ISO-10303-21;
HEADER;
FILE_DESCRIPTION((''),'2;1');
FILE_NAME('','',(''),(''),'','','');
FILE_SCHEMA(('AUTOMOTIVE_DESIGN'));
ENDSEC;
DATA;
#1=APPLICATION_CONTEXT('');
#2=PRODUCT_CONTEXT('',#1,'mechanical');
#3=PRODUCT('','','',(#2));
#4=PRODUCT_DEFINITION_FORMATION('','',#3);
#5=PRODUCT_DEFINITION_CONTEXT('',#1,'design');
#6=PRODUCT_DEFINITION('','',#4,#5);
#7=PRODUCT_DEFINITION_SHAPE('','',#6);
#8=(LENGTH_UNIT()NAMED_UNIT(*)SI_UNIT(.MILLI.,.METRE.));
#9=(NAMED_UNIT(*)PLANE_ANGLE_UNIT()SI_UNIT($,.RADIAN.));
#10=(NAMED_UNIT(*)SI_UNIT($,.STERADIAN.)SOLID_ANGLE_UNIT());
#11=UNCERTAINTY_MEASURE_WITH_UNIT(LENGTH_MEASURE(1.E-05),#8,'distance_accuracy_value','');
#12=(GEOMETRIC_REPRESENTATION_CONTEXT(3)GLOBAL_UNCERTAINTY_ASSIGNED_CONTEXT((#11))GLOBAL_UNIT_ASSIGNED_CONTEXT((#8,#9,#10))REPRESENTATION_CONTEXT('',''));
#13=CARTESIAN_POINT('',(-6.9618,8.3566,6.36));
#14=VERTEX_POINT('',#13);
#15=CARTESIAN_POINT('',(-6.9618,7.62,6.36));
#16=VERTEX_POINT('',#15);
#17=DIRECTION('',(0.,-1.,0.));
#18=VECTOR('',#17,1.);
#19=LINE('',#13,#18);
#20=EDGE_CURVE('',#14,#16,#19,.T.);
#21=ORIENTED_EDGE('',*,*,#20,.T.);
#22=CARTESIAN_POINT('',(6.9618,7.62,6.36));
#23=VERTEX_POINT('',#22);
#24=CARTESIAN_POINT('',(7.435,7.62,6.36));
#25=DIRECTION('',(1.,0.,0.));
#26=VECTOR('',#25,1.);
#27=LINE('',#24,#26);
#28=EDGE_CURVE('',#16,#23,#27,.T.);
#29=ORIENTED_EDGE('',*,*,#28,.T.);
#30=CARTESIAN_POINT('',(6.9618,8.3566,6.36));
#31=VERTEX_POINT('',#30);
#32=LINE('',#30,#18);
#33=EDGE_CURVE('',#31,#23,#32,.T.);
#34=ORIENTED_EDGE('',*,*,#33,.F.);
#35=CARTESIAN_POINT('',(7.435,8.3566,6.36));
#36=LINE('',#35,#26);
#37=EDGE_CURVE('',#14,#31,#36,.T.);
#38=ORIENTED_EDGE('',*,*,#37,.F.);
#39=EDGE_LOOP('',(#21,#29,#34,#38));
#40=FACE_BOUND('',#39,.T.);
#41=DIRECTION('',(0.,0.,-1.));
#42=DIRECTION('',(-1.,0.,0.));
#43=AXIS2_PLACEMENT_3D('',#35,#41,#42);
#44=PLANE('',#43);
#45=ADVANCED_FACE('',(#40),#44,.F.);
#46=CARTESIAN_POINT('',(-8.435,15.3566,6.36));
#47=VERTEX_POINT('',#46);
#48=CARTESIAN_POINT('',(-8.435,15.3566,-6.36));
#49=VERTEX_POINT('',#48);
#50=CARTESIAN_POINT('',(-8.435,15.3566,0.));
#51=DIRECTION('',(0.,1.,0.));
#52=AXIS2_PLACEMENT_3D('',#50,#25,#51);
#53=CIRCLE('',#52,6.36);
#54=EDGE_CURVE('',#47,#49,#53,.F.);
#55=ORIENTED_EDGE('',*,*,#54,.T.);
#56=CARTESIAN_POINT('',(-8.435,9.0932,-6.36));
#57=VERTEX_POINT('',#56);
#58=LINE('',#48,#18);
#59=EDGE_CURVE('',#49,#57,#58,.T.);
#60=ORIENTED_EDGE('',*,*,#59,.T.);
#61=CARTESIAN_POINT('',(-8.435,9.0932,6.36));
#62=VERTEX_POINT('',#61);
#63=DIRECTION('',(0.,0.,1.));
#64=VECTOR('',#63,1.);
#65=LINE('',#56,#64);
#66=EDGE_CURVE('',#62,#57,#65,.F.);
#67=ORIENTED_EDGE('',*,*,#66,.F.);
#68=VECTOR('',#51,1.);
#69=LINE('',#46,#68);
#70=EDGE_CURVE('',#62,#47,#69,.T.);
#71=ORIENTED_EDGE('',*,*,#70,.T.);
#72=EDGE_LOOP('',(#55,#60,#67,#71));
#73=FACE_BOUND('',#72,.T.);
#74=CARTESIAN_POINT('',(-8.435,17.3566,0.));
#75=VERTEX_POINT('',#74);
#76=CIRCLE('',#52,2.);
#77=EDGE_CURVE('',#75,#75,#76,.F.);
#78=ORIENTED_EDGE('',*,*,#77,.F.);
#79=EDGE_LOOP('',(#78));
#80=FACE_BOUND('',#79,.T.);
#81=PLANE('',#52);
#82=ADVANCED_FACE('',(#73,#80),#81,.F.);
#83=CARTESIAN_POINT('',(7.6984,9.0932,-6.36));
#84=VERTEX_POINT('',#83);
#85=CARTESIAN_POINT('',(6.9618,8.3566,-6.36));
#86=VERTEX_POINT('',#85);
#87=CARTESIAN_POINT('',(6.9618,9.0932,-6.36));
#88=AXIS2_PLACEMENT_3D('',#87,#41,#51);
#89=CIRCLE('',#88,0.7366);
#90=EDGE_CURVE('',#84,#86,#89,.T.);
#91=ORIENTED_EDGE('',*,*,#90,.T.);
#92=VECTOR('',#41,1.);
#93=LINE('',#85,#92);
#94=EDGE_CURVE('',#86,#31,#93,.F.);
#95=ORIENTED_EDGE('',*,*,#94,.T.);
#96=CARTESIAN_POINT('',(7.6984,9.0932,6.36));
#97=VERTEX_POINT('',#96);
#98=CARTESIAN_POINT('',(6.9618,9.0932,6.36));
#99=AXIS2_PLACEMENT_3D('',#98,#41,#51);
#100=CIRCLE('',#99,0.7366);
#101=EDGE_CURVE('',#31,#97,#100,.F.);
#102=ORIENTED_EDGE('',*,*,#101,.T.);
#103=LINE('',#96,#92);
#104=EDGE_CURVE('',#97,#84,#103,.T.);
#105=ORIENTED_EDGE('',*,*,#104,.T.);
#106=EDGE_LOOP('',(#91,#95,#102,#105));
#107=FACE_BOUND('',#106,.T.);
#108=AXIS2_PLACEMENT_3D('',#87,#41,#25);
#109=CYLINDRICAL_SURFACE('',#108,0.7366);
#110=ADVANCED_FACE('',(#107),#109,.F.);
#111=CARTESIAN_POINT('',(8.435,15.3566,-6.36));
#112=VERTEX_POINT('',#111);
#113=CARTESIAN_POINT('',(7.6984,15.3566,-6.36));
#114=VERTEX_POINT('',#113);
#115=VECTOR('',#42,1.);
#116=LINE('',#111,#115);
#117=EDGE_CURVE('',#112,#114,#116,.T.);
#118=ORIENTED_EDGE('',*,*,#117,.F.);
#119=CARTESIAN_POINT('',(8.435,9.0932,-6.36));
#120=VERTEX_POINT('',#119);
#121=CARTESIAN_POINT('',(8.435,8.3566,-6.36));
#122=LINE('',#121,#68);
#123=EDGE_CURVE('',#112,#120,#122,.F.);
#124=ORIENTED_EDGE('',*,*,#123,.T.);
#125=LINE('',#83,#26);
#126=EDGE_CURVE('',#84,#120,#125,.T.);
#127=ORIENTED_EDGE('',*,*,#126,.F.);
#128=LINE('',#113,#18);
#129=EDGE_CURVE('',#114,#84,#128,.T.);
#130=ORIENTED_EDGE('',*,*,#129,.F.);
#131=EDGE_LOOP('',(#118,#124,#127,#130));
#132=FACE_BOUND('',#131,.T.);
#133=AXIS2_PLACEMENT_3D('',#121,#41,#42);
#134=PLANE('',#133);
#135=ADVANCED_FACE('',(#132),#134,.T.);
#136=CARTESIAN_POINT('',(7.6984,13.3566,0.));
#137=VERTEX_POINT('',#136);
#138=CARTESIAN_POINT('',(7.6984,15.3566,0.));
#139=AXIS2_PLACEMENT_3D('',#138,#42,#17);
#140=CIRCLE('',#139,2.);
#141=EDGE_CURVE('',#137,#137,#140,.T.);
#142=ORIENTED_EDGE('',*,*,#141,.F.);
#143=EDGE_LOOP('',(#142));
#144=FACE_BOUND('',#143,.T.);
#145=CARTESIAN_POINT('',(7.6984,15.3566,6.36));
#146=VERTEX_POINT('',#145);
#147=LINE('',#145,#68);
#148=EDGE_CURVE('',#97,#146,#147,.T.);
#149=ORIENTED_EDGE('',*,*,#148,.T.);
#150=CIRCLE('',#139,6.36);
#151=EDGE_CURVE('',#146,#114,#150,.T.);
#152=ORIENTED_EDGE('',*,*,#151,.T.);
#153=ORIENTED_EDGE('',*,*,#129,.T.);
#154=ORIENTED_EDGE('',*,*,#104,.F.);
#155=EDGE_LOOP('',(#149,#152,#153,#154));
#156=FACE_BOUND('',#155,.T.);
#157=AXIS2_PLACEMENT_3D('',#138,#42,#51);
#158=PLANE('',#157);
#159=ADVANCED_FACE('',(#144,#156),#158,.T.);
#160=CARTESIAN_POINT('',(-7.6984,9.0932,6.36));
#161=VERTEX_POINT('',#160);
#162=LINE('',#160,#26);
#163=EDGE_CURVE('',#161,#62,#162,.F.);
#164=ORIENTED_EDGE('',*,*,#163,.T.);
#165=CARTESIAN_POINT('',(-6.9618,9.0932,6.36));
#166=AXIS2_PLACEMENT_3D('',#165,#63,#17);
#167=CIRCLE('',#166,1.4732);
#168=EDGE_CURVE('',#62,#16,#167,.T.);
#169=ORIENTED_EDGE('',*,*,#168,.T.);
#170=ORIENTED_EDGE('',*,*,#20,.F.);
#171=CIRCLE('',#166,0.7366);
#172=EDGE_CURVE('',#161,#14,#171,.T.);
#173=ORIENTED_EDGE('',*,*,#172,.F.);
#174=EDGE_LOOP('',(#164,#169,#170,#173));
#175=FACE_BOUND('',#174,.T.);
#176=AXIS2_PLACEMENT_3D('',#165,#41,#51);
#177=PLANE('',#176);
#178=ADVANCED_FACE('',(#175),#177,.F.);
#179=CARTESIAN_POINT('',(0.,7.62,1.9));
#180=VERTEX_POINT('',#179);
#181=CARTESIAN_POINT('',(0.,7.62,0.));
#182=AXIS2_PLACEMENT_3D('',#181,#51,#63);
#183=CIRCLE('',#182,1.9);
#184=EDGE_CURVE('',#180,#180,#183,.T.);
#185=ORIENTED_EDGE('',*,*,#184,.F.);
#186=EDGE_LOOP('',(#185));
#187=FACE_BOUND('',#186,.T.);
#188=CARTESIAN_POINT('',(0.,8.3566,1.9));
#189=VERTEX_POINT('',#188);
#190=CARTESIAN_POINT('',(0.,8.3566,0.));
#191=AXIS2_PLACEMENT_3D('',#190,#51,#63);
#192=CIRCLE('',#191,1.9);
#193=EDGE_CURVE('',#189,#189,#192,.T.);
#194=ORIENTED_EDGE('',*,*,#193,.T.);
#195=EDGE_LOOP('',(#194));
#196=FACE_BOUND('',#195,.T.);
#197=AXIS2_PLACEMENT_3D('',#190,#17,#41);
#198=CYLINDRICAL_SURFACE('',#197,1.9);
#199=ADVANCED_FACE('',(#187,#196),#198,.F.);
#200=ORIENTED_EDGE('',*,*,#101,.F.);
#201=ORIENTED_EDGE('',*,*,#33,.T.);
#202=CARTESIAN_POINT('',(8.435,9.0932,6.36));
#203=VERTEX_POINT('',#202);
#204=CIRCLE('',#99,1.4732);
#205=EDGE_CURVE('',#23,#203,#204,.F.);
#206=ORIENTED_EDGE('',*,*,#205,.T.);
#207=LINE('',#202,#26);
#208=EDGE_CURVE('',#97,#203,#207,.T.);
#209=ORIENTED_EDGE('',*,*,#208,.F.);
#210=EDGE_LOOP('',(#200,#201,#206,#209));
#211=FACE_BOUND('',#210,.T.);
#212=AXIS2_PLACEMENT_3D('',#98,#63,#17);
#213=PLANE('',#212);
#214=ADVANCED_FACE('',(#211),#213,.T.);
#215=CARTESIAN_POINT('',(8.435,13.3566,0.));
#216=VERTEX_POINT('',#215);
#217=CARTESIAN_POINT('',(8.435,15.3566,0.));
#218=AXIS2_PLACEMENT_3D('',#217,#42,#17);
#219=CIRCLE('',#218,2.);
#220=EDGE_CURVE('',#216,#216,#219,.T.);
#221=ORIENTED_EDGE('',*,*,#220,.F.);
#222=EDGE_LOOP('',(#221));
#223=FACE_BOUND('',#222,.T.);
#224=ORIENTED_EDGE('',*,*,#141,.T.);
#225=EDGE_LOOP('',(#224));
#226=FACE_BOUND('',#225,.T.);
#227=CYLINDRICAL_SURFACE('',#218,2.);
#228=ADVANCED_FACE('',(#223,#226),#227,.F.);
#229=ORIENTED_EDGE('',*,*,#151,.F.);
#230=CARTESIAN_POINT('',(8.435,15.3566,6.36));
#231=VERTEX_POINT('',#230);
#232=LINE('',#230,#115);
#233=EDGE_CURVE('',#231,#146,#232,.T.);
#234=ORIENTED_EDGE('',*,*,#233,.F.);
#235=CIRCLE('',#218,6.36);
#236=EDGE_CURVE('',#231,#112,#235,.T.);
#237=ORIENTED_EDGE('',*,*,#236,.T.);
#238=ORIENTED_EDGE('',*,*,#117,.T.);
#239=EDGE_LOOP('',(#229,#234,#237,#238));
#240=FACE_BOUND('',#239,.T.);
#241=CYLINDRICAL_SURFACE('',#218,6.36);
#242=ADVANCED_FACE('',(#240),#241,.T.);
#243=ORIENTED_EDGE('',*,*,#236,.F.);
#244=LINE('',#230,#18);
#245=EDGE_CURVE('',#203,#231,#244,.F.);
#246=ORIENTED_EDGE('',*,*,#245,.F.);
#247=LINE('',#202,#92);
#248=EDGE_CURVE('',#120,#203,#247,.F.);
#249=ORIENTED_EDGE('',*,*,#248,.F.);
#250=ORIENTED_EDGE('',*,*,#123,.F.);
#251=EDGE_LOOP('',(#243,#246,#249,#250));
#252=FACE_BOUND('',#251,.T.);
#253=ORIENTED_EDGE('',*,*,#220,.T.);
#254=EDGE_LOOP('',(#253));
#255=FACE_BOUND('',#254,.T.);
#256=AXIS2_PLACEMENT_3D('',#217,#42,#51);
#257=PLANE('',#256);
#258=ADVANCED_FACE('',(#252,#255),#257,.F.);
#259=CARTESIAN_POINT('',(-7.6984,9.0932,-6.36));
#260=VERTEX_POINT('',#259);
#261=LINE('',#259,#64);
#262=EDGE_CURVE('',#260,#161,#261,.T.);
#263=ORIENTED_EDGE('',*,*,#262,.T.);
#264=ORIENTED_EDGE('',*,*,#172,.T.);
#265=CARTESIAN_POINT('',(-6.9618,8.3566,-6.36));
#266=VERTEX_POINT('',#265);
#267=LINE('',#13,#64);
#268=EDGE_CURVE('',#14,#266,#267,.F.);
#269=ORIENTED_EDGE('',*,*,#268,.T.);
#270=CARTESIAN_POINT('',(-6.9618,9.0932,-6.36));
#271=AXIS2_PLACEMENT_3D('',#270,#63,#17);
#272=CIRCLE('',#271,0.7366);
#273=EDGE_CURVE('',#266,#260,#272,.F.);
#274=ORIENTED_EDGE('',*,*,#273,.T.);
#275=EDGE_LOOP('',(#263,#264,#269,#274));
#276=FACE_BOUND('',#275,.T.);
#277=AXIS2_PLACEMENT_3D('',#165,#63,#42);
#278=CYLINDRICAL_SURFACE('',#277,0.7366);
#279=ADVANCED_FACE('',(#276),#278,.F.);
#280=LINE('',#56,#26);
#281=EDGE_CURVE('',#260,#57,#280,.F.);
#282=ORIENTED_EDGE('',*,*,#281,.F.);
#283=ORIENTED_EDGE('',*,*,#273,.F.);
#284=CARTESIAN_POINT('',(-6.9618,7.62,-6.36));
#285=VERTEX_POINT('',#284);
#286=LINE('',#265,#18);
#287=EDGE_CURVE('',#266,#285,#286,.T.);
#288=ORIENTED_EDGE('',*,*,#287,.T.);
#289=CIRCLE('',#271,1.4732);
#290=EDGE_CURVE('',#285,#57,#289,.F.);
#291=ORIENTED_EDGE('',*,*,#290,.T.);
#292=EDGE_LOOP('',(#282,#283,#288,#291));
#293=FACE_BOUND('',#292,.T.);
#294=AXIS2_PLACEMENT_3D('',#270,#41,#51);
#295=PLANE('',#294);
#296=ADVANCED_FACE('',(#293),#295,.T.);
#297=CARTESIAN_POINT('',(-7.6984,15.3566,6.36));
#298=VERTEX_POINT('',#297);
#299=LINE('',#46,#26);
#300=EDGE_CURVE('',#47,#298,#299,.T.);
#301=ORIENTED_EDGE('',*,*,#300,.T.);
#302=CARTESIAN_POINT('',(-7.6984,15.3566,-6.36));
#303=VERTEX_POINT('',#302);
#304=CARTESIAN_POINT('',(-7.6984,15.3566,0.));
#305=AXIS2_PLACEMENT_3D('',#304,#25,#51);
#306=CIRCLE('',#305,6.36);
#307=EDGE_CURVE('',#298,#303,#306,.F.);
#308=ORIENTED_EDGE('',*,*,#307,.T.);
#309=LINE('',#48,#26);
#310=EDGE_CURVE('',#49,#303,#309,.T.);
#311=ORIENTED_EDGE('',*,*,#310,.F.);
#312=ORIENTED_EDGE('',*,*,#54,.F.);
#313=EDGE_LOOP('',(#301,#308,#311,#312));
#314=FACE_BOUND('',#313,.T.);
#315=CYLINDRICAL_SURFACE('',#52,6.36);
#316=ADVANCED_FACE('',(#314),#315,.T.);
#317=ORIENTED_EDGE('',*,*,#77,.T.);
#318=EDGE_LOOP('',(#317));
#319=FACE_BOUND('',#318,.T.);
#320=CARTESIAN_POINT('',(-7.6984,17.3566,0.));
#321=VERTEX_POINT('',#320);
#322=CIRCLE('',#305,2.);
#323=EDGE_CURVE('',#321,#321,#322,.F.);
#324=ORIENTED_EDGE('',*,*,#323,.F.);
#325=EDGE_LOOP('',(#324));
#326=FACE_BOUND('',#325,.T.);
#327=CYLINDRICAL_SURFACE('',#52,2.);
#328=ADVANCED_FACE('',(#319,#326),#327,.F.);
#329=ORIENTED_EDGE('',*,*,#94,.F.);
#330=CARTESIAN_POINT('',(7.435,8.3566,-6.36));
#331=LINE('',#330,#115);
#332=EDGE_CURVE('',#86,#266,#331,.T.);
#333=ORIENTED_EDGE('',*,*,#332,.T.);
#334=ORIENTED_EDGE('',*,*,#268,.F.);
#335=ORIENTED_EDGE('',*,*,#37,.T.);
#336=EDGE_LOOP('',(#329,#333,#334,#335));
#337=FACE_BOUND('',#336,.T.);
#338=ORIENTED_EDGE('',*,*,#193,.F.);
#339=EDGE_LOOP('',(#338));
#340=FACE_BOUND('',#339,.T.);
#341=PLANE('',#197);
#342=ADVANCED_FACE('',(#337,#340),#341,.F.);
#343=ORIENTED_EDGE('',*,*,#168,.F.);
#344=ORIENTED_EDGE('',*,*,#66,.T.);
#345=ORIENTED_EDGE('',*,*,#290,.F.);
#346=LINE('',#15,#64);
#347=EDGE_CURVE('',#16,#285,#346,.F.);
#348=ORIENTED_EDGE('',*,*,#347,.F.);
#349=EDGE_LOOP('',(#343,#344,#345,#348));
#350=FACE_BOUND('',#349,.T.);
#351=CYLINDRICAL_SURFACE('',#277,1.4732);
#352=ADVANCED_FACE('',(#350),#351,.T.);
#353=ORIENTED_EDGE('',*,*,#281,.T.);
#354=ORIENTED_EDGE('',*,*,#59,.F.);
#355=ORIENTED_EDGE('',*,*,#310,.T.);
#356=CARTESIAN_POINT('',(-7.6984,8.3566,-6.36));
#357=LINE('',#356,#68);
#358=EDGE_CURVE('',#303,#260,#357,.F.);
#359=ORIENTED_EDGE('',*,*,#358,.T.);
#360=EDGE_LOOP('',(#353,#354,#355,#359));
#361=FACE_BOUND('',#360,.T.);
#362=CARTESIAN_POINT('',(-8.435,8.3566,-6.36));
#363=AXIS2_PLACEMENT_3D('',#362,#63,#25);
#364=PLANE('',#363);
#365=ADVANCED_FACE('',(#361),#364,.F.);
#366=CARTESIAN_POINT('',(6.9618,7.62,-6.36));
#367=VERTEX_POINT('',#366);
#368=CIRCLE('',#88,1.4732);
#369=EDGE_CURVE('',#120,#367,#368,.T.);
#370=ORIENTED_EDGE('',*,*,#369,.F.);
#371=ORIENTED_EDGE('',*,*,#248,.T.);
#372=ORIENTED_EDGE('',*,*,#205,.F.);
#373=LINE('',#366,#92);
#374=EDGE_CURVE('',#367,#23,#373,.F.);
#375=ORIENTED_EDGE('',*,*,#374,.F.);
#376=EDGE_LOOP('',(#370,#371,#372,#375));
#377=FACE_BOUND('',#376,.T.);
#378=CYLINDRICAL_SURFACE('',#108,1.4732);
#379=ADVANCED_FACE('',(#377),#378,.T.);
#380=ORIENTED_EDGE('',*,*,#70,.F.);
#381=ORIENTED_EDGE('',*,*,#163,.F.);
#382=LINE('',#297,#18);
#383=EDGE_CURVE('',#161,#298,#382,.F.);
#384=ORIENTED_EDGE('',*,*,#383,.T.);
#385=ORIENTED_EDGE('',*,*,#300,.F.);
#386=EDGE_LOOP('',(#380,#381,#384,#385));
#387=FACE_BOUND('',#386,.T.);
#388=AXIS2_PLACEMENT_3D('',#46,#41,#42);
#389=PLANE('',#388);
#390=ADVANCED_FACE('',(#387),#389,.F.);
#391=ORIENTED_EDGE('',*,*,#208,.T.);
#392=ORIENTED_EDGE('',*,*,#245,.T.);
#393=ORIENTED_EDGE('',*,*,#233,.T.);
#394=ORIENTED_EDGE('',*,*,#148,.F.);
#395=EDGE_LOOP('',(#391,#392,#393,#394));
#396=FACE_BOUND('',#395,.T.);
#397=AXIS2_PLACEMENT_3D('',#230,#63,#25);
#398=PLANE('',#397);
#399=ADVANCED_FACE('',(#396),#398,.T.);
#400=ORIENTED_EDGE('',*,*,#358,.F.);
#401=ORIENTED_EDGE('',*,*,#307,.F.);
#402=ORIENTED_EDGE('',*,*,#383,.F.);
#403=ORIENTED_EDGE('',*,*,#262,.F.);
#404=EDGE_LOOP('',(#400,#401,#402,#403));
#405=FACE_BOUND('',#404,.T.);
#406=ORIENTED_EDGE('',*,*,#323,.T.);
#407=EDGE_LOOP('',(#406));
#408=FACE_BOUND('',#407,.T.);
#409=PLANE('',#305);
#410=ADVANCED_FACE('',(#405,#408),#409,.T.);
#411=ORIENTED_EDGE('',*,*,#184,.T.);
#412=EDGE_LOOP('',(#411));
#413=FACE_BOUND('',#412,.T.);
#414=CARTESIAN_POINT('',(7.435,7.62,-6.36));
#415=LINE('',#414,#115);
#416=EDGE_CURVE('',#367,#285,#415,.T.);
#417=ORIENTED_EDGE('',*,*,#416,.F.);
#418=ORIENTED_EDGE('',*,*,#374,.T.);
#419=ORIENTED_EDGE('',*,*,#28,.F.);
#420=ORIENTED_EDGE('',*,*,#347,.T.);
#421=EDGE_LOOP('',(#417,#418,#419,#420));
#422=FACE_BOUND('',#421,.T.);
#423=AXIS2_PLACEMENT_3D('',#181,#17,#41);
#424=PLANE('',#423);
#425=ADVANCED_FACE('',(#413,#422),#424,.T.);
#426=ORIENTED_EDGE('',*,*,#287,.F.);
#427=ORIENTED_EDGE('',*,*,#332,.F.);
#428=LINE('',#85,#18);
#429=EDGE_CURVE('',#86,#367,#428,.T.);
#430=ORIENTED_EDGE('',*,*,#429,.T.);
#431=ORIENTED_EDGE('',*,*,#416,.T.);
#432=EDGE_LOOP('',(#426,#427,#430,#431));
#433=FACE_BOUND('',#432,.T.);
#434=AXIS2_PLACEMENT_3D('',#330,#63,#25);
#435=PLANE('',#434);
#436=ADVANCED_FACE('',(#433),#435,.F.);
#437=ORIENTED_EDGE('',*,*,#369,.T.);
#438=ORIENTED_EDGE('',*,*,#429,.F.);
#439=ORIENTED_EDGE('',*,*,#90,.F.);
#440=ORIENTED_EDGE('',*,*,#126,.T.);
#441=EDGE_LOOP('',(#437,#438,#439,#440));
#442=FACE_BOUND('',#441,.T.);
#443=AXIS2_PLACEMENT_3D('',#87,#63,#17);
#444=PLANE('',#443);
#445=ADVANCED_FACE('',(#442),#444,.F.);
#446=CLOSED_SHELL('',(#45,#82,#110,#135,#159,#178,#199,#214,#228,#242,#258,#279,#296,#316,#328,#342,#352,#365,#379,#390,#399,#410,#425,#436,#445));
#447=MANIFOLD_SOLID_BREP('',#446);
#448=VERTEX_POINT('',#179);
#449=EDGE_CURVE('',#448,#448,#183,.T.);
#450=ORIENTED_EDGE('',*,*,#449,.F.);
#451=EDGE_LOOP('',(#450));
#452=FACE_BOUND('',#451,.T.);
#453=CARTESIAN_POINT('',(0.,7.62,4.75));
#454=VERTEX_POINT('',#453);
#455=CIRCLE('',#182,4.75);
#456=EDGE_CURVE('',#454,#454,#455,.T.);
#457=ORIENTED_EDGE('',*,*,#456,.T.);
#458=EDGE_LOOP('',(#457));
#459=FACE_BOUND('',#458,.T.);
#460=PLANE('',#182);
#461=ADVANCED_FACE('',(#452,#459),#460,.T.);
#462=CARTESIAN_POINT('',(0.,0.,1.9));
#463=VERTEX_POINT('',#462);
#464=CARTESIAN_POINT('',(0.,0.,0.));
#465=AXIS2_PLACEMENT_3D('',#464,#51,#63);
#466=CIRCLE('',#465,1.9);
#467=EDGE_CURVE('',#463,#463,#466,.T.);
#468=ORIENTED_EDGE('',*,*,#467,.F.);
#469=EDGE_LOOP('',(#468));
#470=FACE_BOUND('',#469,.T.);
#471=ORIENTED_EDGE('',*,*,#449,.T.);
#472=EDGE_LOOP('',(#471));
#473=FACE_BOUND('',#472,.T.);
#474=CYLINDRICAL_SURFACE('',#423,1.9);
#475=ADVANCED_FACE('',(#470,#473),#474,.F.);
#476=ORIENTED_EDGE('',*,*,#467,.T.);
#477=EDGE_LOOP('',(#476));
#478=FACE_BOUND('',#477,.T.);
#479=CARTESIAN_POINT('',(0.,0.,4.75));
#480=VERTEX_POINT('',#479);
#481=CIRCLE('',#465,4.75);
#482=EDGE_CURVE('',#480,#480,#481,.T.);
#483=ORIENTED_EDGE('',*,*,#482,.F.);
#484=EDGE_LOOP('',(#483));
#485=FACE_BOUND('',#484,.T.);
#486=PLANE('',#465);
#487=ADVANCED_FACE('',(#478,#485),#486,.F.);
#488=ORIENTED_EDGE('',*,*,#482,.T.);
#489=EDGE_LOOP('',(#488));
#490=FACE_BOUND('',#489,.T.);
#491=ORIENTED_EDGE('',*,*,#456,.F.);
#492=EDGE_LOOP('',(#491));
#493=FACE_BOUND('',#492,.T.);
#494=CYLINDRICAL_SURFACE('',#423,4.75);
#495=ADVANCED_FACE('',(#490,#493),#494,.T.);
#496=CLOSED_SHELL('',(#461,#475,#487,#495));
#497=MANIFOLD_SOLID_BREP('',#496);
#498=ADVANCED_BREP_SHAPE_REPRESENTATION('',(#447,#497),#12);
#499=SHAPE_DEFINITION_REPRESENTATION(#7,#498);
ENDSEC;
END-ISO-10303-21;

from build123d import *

# Parameters (mm, degrees)
SKETCH1_R                    = 4.75
SKETCH1_R_2                  = 1.9
BOSS_EXTRUDE1_DEPTH          = 7.62
SKETCH2_W                    = 14.87
SKETCH2_H                    = 12.72
SKETCH2_R                    = 1.9
BASE_FLANGE1_DEPTH           = 0.7366
EDGE_FLANGE1_STRIP_W         = 5.4196
EDGE_FLANGE1_STRIP_H         = 0.7366
EDGE_FLANGE1_STRIP_CUT_DEPTH = 12.72
EDGE_FLANGE1_DEPTH           = 12.72
EDGE_FLANGE1_PROFILE_R       = 2
EDGE_FLANGE1_FLAT_DEPTH      = 0.7366


# Sheet-metal steps are written as plain solids
with BuildPart() as part:
    # Sketch1 → Boss-Extrude1 (new body)
    with BuildSketch(Plane(origin=(0, 0, 0), x_dir=(1, 0, 0), z_dir=(0, 1, 0))):
        with Locations(Location((0, 0, 0), (0, 0, 270))):
            Circle(SKETCH1_R)
        with Locations(Location((0, 0, 0), (0, 0, 270))):
            Circle(SKETCH1_R_2, mode=Mode.SUBTRACT)
    extrude(amount=BOSS_EXTRUDE1_DEPTH)


with BuildPart() as body_2:
    # Sketch2 → Base-Flange1 (new body)
    with BuildSketch(Plane(origin=(0, 7.62, 0), x_dir=(1, 0, 0), z_dir=(0, 1, 0))):
        Rectangle(SKETCH2_W, SKETCH2_H)
        with Locations(Location((0, 0, 0), (0, 0, 270))):
            Circle(SKETCH2_R, mode=Mode.SUBTRACT)
    extrude(amount=BASE_FLANGE1_DEPTH)

    # Edge-Flange1 strip (across the edge) → Edge-Flange1 strip cut (cut)
    with BuildSketch(Plane(origin=(-8.435, 8.3566, -6.36), x_dir=(1, 0, 0), z_dir=(0, 0, 1))):
        with Locations((-1.2366, -0.3683)):
            Rectangle(EDGE_FLANGE1_STRIP_W, EDGE_FLANGE1_STRIP_H)
    edge_flange1_strip_cut = extrude(amount=EDGE_FLANGE1_STRIP_CUT_DEPTH, mode=Mode.SUBTRACT)

    # Edge-Flange1 bend section (across the edge) → Edge-Flange1 (add)
    with BuildSketch(Plane(origin=(-8.435, 8.3566, -6.36), x_dir=(1, 0, 0), z_dir=(0, 0, 1))):
        with BuildLine():
            Line((0, 0.7366), (0.7366, 0.7366))
            ThreePointArc((0.7366, 0.7366), (0.952345145, 0.215745145), (1.4732, 0))
            Line((1.4732, 0), (1.4732, -0.7366))
            ThreePointArc((1.4732, -0.7366), (0.43149029, -0.30510971), (0, 0.7366))
        make_face()
    edge_flange1 = extrude(amount=EDGE_FLANGE1_DEPTH)

    # Edge-Flange1 profile (on flange) → Edge-Flange1 flat (add)
    with BuildSketch(Plane(origin=(-8.435, 8.3566, 0), x_dir=(0, 0, 1), z_dir=(-1, 0, 0))):
        with BuildLine():
            ThreePointArc((6.36, 7), (0, 13.36), (-6.36, 7))
            Line((-6.36, 7), (-6.36, 0.7366))
            Line((-6.36, 0.7366), (6.36, 0.7366))
            Line((6.36, 0.7366), (6.36, 7))
        make_face()
        with Locations((0, 7)):
            Circle(EDGE_FLANGE1_PROFILE_R, mode=Mode.SUBTRACT)
    edge_flange1_flat = extrude(amount=-EDGE_FLANGE1_FLAT_DEPTH)

    # Mirror1: Edge-Flange1 strip cut, Edge-Flange1, Edge-Flange1 flat across plane
    add(edge_flange1_strip_cut.mirror(Plane(origin=(0, 0, 0), x_dir=(0, 0, 1), z_dir=(1, 0, 0))), mode=Mode.SUBTRACT)
    add(edge_flange1.mirror(Plane(origin=(0, 0, 0), x_dir=(0, 0, 1), z_dir=(1, 0, 0))))
    add(edge_flange1_flat.mirror(Plane(origin=(0, 0, 0), x_dir=(0, 0, 1), z_dir=(1, 0, 0))))


solid = Compound([part.part, body_2.part])
